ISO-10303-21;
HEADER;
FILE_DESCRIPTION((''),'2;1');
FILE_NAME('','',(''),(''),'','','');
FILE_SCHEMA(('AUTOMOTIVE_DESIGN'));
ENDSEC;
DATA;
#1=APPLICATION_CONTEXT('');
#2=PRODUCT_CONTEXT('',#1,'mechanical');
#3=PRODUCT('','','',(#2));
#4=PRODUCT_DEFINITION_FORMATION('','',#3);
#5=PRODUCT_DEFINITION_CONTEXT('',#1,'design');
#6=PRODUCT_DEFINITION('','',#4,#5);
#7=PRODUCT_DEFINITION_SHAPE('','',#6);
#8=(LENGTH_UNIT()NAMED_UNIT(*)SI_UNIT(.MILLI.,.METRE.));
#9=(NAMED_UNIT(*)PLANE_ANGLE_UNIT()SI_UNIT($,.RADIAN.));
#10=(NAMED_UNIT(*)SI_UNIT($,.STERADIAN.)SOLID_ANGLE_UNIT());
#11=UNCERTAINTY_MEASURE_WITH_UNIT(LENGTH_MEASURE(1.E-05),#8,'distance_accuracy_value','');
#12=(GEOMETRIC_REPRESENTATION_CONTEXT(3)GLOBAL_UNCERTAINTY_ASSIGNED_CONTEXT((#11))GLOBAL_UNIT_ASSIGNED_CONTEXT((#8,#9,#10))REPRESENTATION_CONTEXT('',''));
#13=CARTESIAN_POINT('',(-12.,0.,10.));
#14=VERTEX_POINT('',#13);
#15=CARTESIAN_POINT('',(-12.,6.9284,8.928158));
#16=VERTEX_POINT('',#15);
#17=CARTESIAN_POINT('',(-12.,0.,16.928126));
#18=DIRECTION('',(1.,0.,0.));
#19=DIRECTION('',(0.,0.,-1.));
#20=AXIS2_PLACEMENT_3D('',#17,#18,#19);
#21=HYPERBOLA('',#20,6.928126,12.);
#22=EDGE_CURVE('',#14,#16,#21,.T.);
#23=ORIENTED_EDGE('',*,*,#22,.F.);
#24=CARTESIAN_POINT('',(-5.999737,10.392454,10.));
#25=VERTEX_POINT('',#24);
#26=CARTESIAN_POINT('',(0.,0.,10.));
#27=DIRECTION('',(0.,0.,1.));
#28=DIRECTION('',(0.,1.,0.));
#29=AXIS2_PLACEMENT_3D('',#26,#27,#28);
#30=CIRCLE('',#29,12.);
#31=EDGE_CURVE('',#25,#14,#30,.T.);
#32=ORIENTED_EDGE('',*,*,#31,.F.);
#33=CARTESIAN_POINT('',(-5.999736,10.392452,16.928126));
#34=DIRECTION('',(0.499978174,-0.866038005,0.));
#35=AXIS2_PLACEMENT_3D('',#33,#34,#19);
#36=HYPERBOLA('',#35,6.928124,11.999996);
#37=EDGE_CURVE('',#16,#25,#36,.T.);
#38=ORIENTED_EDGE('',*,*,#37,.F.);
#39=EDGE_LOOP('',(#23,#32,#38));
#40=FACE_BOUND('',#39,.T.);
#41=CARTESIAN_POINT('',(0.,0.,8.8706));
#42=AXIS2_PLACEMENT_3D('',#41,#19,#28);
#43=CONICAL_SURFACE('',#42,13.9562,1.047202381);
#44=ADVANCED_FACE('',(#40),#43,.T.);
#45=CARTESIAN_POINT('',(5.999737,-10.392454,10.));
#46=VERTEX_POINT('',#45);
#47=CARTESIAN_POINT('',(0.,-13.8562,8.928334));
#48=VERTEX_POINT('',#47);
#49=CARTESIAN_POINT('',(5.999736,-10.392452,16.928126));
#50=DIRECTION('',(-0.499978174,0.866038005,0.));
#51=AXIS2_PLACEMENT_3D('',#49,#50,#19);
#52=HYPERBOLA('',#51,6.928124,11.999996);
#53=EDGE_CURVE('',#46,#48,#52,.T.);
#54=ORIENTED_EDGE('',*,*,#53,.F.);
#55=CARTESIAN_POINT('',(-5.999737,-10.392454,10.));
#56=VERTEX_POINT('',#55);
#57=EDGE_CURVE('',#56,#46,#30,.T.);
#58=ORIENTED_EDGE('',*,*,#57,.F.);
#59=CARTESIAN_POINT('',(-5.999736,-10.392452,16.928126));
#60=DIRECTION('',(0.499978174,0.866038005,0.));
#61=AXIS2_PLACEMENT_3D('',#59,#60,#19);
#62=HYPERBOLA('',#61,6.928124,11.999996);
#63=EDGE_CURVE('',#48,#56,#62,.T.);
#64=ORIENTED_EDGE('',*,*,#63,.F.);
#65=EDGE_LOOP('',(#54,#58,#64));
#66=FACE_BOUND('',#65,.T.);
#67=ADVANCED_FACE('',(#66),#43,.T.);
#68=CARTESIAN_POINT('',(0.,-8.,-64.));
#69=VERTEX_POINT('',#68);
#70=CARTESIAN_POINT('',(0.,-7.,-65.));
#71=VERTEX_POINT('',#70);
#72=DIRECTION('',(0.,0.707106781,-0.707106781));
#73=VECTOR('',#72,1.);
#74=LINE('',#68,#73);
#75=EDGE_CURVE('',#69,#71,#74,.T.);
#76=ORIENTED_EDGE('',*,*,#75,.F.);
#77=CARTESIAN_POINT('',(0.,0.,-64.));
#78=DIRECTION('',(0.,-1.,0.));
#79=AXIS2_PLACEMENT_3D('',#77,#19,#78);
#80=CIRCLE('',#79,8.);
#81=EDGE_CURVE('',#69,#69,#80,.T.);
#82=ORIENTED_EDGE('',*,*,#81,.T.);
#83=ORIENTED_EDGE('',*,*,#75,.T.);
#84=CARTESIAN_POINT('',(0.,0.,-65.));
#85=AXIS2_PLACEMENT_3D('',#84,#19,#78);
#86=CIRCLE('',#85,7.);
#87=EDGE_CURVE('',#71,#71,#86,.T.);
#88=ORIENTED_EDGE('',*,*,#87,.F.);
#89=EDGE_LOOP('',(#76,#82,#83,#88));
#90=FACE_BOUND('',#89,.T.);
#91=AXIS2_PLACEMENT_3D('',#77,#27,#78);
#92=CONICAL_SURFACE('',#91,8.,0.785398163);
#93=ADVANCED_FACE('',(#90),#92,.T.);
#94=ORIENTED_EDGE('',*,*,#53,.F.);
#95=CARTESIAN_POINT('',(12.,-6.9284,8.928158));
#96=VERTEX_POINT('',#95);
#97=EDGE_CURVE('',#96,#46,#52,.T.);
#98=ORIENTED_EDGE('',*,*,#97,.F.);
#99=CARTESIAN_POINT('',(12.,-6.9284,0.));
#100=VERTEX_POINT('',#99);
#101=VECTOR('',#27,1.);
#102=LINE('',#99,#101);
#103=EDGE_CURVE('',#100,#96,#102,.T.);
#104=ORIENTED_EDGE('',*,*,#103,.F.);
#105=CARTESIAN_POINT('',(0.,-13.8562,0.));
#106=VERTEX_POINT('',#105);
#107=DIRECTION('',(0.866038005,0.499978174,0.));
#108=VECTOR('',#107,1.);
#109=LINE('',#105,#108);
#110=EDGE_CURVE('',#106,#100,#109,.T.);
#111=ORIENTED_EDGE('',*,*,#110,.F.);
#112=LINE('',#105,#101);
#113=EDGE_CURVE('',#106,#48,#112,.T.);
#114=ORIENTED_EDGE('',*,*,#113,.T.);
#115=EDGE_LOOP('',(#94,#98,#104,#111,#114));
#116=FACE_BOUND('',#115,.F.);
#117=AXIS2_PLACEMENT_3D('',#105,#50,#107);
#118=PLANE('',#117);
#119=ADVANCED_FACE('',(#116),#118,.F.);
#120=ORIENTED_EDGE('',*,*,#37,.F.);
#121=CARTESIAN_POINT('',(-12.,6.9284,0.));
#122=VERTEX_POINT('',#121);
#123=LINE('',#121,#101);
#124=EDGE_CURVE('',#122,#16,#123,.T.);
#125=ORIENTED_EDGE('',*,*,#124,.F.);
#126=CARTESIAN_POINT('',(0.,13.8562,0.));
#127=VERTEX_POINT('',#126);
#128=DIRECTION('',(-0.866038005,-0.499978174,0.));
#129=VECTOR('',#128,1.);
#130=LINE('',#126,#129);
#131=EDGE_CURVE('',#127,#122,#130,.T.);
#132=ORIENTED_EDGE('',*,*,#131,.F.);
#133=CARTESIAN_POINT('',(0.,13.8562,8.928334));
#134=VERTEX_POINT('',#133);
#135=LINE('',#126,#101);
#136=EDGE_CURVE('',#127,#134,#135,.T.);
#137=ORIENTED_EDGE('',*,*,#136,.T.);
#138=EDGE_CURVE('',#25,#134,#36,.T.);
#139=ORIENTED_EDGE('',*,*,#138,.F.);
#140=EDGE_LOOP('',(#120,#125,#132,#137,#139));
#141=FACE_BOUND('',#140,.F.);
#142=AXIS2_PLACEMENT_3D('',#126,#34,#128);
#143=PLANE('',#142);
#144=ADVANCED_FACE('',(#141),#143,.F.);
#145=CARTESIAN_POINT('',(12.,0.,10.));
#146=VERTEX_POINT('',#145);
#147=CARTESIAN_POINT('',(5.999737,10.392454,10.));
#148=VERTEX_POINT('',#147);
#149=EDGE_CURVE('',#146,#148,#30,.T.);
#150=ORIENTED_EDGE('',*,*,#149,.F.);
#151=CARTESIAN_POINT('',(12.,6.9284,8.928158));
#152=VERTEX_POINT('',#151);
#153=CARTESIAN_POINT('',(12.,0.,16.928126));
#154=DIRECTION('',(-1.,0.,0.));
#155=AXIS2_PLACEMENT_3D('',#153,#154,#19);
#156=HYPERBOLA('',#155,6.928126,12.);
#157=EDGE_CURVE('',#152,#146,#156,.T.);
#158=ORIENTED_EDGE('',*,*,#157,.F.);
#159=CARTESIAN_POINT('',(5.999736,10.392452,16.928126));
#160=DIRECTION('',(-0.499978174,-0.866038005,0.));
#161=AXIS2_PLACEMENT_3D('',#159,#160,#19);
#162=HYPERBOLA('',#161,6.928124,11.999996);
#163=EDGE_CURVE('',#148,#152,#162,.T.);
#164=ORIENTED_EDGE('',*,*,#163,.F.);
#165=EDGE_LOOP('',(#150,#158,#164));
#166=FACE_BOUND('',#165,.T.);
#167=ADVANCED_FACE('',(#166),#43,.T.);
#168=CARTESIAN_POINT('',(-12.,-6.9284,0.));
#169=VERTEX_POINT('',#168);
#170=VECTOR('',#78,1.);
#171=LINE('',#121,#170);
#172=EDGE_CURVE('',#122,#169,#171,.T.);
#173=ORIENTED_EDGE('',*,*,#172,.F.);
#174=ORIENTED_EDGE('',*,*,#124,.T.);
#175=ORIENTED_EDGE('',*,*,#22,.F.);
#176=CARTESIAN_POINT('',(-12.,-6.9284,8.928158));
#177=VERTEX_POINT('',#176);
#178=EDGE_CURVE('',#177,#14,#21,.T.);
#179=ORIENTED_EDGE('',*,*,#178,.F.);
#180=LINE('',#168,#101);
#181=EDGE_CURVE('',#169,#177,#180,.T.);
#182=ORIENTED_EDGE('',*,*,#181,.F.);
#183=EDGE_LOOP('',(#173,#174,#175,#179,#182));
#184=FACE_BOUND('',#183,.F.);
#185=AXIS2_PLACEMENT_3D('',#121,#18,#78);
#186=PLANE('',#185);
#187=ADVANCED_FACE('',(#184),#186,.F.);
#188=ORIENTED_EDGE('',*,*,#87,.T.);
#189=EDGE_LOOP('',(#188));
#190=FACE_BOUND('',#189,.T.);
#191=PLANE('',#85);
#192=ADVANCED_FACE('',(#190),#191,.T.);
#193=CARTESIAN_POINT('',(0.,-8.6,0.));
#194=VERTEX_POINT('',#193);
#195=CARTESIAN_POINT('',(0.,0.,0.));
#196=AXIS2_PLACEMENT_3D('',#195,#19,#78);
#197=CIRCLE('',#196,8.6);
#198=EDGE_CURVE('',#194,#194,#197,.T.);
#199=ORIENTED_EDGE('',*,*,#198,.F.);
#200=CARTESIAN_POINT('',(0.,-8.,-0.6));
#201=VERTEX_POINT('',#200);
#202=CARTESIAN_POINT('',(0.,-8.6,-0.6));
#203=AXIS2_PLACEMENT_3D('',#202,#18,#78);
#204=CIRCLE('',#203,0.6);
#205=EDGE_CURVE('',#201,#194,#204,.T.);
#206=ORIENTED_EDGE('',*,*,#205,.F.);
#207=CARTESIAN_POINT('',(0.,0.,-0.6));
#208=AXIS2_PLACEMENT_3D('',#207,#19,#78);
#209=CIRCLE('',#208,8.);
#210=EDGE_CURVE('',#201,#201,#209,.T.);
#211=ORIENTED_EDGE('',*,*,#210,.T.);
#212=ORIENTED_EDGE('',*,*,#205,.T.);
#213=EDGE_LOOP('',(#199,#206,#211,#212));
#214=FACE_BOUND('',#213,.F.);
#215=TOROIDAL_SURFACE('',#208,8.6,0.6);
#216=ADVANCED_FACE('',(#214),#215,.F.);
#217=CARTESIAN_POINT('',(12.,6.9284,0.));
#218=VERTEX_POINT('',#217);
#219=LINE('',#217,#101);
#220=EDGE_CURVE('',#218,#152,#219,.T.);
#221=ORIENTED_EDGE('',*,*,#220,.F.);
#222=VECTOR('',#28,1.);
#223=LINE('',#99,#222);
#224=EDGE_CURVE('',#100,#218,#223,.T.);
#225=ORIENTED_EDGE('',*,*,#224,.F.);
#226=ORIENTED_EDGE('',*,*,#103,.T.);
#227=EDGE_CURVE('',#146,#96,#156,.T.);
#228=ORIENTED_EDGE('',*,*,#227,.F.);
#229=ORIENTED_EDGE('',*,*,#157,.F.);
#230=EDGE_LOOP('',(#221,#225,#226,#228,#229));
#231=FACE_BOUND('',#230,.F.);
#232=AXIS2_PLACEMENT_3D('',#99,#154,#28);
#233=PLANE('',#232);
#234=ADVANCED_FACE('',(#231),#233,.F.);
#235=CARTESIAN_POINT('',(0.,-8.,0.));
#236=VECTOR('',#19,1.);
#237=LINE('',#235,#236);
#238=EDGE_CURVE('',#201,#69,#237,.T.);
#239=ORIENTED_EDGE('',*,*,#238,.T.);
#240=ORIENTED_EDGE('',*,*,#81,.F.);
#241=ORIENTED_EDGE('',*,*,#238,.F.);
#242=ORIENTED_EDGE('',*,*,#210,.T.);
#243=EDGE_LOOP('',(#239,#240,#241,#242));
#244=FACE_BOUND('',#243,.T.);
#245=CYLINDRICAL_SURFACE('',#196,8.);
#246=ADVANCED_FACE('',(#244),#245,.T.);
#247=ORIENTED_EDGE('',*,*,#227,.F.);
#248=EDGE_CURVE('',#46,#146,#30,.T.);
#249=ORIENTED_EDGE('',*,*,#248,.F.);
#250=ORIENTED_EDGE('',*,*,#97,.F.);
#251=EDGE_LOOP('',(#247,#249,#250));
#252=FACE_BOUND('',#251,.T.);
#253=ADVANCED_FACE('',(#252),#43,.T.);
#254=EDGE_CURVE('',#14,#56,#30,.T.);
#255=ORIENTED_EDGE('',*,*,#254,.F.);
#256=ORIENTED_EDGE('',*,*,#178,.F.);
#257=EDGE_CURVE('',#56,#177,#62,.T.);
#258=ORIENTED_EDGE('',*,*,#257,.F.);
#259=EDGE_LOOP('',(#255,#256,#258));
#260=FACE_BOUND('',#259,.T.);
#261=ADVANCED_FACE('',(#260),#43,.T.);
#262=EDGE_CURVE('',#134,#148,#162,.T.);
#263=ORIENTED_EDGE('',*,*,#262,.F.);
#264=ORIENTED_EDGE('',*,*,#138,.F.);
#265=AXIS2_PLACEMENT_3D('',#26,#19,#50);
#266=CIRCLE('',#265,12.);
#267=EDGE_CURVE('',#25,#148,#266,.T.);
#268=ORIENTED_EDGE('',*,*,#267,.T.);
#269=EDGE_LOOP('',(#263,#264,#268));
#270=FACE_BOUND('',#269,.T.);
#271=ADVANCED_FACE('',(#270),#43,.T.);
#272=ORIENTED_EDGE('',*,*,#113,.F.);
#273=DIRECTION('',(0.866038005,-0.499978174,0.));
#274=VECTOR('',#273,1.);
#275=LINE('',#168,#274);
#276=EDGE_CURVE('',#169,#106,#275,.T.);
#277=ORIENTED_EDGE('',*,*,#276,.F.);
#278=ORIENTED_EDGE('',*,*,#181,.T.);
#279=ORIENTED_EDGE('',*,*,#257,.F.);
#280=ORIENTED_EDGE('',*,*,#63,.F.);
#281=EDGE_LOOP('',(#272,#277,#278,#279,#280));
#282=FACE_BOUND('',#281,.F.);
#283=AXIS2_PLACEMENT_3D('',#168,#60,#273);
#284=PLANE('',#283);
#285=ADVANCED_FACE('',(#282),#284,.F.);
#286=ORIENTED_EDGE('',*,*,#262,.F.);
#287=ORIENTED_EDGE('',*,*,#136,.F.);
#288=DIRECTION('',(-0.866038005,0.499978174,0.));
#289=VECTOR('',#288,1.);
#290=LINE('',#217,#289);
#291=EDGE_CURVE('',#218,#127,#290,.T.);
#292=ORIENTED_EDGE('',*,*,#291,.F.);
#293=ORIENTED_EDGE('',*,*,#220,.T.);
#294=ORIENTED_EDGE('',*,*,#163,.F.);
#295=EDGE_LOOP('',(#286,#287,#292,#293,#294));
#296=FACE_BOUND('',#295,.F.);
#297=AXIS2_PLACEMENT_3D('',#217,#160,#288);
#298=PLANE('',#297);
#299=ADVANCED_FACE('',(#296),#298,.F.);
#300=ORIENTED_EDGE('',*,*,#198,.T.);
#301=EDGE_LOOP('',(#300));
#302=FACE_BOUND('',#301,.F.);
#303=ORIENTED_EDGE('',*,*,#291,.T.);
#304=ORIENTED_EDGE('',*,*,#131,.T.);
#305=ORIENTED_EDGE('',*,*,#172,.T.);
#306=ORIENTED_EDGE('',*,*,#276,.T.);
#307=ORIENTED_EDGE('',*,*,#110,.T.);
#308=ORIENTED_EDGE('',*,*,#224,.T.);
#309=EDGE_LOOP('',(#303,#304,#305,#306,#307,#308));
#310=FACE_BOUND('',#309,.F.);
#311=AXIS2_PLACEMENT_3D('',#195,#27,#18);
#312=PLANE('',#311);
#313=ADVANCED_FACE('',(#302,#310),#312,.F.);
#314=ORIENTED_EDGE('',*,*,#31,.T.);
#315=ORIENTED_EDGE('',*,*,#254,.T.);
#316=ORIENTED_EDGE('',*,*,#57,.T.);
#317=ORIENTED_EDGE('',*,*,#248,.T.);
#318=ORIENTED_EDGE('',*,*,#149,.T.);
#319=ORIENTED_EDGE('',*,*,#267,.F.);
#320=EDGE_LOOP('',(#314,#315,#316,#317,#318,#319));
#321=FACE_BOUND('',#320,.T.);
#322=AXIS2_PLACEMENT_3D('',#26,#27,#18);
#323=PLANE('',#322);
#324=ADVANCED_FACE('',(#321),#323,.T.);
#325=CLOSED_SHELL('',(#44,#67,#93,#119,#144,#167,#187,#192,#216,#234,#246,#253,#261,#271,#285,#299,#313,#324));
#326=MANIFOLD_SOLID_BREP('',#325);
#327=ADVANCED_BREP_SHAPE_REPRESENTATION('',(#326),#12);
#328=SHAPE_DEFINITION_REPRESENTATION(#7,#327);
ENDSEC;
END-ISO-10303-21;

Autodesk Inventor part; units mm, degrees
ref_plane "WorkPlane1" through (0, 0, 0) normal (0, 0, 1) x (1, 0, 0)
sketch "Sketch1" plane through (0, 0, 0) normal (0, 0, 1) x (1, 0, 0)
  point P0 (0, 0)
sketch "Sketch2" plane through (0, 0, 0) normal (0, 0, 1) x (1, 0, 0)
  line L0 (-12, 6.9284) -> (-12, -6.9284)
  line L1 (0, 13.8562) -> (-12, 6.9284)
  line L2 (12, 6.9284) -> (0, 13.8562)
  line L3 (12, -6.9284) -> (12, 6.9284)
  line L4 (0, -13.8562) -> (12, -6.9284)
  line L5 (-12, -6.9284) -> (0, -13.8562)
  circle A0 centre (0, 0) radius 12 construction
  dimension "d1" = 24
  dimension "d29" = 0
  dimension "d30" = 0
extrude "Extrusion1" add sketch "Sketch2" along normal blind 10
sketch "Sketch3" plane through (0, 0, 0) normal (1, 0, 0) x (0, 1, 0)
  line L0 (12, 10) -> (13.9562, 10)
  line L1 (13.9562, 8.8706) -> (12, 10)
  line L2 (13.9562, 10) -> (13.9562, 8.8706)
  line L3 (0, -2) -> (0, 12) projected
  line L4 (13.8562, 0) -> (13.8562, 10) projected
  dimension "d25" = 0.1
  dimension "d26" = 0
  dimension "d27" = 60
  dimension "d28" = 12
revolve "Revolution1" cut sketch "Sketch3" angle 360 about axis through (0, 0, -10) along (0, 0, 1)
sketch "Sketch4" plane through (0, 0, 0) normal (1, 0, 0) x (0, 1, 0)
  line L0 (0, -65) -> (0, 0)
  line L1 (-8, -65) -> (0, -65)
  line L2 (-8, 0) -> (-8, -65)
  line L3 (0, 0) -> (-8, 0)
  line L4 (0, -65) -> (0, 0)
  line L5 (-9.6, 0) -> (1.6, 0) projected
  line L6 (0, -78) -> (0, 13) projected
  dimension "d18" = 8
  dimension "d20" = 65
  dimension "d33" = 0
  dimension "d34" = 0
revolve "Revolution2" add sketch "Sketch4" angle 360 about axis through (0, 0, -65) along (0, 0, -1)
chamfer "Chamfer1" distance 1 angle 45 1 edges at (0, 8, -65)
fillet "Fillet1" radius 0.6 1 edges at (0, 8, 0)
thread "Thread1" size "M16x2" class "6g" standard "ISO Metric profile" length 38
ref_plane "MSC_PF1" through (0, 0, 0) normal (1, 0, 0) x (0, 1, 0)
ref_plane "MSC_PT1" through (0, 0, 0) normal (0, 0, -1) x (-1, 0, 0)
equation "\"d22\" = 0.5 * PTC"
equation "\"d23\" = 0.5 * PTC"
equation "\"d24\" = r"
equation "\"d1\" = ParS"
equation "\"d6\" = ParK"
equation "\"d28\" = 0.5 * ParS"
equation "\"d18\" = 0.5 * NND"
equation "\"d20\" = NLG"
equation "\"NND\" = 16"
equation "\"NLG\" = 65"
equation "\"PTC\" = 2"
equation "\"ParK\" = 10"
equation "\"ParS\" = 24"
equation "\"msp_es\" = 0.577367 * ParS"
equation "\"r\" = 0.6"
equation "\"THREADDIA\" = NND"
properties part number "ISO 4016 - M16 x 65" material "Steel"
